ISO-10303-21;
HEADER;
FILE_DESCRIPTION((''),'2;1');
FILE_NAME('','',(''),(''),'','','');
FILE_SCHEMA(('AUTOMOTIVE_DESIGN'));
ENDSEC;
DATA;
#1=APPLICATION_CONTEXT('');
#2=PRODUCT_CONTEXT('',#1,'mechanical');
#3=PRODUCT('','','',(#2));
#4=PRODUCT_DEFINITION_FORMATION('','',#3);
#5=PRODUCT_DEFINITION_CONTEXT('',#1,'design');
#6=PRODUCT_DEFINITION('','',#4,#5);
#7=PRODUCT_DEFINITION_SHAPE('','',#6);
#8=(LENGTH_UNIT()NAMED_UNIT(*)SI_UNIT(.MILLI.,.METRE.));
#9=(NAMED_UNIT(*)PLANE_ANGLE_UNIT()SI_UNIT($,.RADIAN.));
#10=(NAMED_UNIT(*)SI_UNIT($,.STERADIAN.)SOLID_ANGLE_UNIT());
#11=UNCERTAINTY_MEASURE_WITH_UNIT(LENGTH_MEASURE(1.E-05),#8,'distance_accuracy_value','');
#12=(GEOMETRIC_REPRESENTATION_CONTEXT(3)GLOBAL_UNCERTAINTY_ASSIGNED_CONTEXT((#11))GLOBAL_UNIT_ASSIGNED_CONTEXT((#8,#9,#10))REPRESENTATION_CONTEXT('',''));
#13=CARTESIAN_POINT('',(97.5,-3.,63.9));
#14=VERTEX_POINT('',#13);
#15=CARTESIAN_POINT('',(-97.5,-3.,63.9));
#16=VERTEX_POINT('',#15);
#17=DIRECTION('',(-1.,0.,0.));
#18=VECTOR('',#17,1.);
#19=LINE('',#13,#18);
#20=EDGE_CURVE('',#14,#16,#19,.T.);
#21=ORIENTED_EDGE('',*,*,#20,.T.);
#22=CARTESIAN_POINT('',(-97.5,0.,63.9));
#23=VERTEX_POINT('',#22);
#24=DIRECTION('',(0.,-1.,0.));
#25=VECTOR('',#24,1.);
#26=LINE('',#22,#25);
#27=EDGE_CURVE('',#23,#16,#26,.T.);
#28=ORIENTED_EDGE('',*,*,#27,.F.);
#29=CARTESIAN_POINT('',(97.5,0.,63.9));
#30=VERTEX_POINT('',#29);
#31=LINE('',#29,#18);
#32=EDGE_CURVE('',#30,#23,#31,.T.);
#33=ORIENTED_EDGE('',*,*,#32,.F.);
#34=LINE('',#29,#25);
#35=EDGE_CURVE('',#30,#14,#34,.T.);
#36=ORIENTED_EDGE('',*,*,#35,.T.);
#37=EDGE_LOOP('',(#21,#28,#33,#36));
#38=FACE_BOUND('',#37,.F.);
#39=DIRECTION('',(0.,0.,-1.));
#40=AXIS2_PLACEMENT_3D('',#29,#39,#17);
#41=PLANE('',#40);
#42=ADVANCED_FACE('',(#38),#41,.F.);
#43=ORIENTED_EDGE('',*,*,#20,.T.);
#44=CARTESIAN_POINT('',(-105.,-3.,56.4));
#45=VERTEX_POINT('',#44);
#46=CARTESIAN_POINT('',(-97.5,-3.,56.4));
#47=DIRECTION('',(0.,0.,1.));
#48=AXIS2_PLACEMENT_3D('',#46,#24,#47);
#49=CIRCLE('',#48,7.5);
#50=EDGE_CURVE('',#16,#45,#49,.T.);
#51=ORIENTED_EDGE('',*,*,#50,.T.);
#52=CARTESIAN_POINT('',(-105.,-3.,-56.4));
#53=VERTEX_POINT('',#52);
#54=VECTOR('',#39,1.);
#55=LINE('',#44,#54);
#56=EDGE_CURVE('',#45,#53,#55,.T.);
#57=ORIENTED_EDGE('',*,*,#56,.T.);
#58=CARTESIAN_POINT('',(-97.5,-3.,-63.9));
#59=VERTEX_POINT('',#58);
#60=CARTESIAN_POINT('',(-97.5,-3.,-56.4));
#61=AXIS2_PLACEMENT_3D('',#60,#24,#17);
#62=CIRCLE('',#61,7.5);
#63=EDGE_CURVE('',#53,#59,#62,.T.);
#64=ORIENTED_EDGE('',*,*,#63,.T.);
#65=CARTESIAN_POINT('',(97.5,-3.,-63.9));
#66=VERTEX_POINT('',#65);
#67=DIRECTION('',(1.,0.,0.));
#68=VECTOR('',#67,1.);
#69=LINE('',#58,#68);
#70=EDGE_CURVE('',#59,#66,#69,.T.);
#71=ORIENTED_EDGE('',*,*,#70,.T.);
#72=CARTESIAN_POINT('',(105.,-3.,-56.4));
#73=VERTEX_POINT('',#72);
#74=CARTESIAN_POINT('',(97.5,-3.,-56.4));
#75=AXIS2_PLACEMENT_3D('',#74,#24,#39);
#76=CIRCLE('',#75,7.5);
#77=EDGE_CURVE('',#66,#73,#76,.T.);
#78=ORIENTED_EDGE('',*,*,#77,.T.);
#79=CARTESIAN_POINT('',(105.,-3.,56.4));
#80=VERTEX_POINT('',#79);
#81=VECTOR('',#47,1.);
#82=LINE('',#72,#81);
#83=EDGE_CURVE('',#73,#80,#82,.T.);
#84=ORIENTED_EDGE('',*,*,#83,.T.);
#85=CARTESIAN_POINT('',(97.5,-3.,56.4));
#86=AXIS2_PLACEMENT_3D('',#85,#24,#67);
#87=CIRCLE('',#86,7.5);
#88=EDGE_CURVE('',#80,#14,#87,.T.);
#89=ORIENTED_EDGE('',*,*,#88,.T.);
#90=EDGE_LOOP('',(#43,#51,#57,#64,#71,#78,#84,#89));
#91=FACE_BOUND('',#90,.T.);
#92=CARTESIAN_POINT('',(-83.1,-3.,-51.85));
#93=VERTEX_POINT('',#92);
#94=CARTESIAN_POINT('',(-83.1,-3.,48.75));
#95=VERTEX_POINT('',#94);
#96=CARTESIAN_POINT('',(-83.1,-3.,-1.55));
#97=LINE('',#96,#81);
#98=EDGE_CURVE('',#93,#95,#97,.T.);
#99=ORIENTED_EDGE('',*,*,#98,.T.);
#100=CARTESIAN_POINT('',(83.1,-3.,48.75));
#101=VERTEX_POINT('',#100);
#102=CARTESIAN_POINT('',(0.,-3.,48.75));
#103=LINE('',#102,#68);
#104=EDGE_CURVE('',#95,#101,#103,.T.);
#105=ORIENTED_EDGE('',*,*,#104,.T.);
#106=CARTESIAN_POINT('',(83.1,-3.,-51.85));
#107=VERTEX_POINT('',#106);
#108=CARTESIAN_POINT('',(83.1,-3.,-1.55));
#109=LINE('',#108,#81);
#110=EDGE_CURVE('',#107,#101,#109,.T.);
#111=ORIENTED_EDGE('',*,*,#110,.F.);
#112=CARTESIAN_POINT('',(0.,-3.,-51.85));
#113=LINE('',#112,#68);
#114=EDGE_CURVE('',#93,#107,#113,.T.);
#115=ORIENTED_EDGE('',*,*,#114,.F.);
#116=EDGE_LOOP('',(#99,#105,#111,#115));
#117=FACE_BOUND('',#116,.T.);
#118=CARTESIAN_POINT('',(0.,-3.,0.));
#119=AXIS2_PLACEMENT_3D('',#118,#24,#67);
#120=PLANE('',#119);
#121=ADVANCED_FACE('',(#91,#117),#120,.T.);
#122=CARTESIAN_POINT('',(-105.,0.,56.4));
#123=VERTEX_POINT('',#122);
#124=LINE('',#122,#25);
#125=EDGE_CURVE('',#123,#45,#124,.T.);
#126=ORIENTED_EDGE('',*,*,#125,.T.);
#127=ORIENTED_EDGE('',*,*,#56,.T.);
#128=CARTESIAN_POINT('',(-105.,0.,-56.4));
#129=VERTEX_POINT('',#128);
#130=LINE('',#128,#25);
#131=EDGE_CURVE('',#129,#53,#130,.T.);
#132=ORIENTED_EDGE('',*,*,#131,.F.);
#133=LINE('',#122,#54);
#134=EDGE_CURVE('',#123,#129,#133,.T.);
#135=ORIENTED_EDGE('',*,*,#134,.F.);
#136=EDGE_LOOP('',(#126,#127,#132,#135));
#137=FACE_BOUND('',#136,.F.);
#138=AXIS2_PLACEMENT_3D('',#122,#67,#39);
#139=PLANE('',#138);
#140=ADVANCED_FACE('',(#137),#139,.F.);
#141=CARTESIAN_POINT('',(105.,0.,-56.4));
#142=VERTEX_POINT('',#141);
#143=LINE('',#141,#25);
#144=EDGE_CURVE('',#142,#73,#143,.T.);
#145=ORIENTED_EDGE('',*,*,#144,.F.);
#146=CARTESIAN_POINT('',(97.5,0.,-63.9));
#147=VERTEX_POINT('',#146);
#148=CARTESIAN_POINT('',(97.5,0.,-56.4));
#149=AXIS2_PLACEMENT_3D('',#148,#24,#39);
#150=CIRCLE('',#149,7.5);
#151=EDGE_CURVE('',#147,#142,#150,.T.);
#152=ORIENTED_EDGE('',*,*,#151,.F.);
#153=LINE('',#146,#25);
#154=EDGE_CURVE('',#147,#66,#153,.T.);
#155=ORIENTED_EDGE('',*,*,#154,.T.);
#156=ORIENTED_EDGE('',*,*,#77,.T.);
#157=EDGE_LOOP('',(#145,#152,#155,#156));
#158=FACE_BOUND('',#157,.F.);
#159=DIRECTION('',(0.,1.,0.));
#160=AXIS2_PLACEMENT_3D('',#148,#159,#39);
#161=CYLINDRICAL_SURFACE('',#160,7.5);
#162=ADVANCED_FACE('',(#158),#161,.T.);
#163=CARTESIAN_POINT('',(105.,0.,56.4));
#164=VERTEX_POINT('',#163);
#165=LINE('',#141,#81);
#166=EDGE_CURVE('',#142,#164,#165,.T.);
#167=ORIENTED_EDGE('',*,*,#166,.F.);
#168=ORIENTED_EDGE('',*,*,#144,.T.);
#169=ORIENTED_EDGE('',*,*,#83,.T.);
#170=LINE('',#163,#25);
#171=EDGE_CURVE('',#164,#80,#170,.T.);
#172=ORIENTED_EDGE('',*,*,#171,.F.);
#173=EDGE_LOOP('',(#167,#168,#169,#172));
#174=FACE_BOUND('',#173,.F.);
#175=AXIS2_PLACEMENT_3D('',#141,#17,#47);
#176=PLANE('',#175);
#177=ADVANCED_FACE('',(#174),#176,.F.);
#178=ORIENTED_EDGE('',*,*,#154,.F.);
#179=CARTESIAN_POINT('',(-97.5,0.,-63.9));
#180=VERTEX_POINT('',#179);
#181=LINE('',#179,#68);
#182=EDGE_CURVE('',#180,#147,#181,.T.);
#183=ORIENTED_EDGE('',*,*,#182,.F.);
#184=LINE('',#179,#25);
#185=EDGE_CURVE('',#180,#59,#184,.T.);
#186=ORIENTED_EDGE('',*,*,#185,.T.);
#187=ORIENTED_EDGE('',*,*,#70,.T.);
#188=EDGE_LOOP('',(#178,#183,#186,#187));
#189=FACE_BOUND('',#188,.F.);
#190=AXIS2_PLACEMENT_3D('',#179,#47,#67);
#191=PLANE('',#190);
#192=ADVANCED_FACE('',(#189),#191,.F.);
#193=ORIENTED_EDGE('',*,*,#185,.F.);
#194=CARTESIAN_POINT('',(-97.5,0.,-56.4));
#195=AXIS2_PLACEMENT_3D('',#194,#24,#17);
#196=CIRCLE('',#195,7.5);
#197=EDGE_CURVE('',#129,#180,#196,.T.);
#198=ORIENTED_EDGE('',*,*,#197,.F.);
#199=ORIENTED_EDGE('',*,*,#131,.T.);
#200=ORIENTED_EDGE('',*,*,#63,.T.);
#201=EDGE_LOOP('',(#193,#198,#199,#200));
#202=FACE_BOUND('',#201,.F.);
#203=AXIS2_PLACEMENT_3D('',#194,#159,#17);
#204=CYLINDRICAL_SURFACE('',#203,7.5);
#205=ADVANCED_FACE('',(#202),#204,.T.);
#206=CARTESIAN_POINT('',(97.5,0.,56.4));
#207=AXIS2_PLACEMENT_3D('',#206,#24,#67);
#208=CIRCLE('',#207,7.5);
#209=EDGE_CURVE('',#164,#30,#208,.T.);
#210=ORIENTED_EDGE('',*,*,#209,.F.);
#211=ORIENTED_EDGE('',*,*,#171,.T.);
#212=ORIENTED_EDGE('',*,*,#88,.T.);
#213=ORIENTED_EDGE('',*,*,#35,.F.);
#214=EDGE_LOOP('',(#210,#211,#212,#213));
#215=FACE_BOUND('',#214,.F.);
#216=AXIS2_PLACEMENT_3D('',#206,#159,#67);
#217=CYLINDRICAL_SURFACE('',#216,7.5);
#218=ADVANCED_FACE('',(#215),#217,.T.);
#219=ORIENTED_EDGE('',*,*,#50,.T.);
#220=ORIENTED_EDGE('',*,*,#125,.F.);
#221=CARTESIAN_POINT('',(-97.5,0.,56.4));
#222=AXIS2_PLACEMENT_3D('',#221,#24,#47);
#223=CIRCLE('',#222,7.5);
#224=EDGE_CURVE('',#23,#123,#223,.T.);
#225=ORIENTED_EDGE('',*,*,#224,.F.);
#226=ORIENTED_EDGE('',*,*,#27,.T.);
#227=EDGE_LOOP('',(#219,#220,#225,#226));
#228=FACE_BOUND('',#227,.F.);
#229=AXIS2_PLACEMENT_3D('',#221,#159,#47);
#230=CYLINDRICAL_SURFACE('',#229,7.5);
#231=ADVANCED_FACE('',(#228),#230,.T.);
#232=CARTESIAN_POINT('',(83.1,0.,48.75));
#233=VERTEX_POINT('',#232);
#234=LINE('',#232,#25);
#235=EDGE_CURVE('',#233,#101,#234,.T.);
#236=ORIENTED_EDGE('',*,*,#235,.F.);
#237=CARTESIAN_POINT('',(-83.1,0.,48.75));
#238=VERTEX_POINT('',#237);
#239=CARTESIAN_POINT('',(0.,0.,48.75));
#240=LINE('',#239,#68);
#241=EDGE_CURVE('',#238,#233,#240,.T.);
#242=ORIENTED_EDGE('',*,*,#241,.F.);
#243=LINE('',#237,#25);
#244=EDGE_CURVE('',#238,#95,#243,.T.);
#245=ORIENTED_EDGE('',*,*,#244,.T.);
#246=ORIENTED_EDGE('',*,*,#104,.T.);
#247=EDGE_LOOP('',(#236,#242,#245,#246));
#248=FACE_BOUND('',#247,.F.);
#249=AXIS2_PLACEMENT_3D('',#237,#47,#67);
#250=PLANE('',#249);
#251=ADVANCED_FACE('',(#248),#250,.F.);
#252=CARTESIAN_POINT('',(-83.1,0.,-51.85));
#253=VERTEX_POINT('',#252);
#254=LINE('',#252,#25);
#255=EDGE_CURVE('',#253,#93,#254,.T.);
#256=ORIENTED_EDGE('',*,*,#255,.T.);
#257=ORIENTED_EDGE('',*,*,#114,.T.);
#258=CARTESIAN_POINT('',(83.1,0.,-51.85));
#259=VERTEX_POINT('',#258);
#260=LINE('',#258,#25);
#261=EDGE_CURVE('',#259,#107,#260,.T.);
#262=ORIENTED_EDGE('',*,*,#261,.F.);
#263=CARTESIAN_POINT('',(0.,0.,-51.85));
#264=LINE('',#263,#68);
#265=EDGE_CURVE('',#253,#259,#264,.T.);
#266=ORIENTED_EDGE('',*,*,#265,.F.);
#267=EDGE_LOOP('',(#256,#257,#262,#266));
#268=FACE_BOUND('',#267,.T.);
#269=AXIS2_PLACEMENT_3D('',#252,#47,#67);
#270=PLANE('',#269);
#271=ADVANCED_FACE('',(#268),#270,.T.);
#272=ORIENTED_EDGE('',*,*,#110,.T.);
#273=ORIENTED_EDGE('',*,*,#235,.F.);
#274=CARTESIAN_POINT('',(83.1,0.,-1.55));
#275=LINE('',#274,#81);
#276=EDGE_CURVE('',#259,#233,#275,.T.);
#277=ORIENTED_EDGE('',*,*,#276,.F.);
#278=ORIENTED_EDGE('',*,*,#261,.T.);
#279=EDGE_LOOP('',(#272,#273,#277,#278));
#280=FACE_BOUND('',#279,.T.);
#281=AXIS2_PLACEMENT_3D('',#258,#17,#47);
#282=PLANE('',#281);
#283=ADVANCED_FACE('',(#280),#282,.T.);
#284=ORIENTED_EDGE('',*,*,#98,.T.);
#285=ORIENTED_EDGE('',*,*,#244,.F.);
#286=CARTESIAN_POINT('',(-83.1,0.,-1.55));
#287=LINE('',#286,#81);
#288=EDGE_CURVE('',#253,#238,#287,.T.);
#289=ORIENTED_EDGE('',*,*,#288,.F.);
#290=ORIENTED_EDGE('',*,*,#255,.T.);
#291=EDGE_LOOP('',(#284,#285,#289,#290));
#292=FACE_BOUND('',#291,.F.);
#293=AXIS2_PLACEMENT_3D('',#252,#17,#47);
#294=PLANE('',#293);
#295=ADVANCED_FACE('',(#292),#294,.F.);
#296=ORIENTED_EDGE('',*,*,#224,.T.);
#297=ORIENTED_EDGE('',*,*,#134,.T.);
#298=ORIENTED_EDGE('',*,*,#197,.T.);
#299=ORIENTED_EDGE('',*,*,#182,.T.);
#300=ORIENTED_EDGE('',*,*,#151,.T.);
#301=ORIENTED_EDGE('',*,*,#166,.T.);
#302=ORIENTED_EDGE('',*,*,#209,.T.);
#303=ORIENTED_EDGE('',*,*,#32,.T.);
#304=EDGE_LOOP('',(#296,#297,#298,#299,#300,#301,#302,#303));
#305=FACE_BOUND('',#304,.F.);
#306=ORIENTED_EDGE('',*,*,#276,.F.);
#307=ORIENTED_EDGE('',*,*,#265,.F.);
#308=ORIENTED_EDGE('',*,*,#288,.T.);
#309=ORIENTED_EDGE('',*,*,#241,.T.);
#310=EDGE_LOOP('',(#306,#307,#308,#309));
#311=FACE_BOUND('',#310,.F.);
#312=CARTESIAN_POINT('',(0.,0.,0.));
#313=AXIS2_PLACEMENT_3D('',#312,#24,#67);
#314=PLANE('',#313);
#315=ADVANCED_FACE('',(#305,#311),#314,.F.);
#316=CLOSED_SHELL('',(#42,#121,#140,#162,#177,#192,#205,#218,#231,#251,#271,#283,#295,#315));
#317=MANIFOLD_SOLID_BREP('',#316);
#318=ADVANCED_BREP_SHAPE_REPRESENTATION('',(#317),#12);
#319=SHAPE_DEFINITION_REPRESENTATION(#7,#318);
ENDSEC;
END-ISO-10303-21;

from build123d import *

# Parameters (mm, degrees)
F0_W     = 166.2
F0_H     = 100.6
F1_DEPTH = 3


# Not quite as in the source:
# - a feature names something its author has since deleted; it is built from what else it names


with BuildPart() as f1:
    # F0 (on Front) → F1 (new body)
    with BuildSketch(Plane.XZ):
        with BuildLine():
            ThreePointArc((105, 56.4), (102.8033008589, 61.7033008589), (97.5, 63.9))
            Line((97.5, 63.9), (-97.5, 63.9))
            ThreePointArc((-97.5, 63.9), (-102.8033008589, 61.7033008589), (-105, 56.4))
            Line((-105, 56.4), (-105, -56.4))
            ThreePointArc((-105, -56.4), (-102.8033008589, -61.7033008589), (-97.5, -63.9))
            Line((-97.5, -63.9), (97.5, -63.9))
            ThreePointArc((97.5, -63.9), (102.8033008589, -61.7033008589), (105, -56.4))
            Line((105, -56.4), (105, 56.4))
        make_face()
        with Locations((0, -1.55)):
            Rectangle(F0_W, F0_H, mode=Mode.SUBTRACT)
    extrude(amount=F1_DEPTH)


solid = f1.part
